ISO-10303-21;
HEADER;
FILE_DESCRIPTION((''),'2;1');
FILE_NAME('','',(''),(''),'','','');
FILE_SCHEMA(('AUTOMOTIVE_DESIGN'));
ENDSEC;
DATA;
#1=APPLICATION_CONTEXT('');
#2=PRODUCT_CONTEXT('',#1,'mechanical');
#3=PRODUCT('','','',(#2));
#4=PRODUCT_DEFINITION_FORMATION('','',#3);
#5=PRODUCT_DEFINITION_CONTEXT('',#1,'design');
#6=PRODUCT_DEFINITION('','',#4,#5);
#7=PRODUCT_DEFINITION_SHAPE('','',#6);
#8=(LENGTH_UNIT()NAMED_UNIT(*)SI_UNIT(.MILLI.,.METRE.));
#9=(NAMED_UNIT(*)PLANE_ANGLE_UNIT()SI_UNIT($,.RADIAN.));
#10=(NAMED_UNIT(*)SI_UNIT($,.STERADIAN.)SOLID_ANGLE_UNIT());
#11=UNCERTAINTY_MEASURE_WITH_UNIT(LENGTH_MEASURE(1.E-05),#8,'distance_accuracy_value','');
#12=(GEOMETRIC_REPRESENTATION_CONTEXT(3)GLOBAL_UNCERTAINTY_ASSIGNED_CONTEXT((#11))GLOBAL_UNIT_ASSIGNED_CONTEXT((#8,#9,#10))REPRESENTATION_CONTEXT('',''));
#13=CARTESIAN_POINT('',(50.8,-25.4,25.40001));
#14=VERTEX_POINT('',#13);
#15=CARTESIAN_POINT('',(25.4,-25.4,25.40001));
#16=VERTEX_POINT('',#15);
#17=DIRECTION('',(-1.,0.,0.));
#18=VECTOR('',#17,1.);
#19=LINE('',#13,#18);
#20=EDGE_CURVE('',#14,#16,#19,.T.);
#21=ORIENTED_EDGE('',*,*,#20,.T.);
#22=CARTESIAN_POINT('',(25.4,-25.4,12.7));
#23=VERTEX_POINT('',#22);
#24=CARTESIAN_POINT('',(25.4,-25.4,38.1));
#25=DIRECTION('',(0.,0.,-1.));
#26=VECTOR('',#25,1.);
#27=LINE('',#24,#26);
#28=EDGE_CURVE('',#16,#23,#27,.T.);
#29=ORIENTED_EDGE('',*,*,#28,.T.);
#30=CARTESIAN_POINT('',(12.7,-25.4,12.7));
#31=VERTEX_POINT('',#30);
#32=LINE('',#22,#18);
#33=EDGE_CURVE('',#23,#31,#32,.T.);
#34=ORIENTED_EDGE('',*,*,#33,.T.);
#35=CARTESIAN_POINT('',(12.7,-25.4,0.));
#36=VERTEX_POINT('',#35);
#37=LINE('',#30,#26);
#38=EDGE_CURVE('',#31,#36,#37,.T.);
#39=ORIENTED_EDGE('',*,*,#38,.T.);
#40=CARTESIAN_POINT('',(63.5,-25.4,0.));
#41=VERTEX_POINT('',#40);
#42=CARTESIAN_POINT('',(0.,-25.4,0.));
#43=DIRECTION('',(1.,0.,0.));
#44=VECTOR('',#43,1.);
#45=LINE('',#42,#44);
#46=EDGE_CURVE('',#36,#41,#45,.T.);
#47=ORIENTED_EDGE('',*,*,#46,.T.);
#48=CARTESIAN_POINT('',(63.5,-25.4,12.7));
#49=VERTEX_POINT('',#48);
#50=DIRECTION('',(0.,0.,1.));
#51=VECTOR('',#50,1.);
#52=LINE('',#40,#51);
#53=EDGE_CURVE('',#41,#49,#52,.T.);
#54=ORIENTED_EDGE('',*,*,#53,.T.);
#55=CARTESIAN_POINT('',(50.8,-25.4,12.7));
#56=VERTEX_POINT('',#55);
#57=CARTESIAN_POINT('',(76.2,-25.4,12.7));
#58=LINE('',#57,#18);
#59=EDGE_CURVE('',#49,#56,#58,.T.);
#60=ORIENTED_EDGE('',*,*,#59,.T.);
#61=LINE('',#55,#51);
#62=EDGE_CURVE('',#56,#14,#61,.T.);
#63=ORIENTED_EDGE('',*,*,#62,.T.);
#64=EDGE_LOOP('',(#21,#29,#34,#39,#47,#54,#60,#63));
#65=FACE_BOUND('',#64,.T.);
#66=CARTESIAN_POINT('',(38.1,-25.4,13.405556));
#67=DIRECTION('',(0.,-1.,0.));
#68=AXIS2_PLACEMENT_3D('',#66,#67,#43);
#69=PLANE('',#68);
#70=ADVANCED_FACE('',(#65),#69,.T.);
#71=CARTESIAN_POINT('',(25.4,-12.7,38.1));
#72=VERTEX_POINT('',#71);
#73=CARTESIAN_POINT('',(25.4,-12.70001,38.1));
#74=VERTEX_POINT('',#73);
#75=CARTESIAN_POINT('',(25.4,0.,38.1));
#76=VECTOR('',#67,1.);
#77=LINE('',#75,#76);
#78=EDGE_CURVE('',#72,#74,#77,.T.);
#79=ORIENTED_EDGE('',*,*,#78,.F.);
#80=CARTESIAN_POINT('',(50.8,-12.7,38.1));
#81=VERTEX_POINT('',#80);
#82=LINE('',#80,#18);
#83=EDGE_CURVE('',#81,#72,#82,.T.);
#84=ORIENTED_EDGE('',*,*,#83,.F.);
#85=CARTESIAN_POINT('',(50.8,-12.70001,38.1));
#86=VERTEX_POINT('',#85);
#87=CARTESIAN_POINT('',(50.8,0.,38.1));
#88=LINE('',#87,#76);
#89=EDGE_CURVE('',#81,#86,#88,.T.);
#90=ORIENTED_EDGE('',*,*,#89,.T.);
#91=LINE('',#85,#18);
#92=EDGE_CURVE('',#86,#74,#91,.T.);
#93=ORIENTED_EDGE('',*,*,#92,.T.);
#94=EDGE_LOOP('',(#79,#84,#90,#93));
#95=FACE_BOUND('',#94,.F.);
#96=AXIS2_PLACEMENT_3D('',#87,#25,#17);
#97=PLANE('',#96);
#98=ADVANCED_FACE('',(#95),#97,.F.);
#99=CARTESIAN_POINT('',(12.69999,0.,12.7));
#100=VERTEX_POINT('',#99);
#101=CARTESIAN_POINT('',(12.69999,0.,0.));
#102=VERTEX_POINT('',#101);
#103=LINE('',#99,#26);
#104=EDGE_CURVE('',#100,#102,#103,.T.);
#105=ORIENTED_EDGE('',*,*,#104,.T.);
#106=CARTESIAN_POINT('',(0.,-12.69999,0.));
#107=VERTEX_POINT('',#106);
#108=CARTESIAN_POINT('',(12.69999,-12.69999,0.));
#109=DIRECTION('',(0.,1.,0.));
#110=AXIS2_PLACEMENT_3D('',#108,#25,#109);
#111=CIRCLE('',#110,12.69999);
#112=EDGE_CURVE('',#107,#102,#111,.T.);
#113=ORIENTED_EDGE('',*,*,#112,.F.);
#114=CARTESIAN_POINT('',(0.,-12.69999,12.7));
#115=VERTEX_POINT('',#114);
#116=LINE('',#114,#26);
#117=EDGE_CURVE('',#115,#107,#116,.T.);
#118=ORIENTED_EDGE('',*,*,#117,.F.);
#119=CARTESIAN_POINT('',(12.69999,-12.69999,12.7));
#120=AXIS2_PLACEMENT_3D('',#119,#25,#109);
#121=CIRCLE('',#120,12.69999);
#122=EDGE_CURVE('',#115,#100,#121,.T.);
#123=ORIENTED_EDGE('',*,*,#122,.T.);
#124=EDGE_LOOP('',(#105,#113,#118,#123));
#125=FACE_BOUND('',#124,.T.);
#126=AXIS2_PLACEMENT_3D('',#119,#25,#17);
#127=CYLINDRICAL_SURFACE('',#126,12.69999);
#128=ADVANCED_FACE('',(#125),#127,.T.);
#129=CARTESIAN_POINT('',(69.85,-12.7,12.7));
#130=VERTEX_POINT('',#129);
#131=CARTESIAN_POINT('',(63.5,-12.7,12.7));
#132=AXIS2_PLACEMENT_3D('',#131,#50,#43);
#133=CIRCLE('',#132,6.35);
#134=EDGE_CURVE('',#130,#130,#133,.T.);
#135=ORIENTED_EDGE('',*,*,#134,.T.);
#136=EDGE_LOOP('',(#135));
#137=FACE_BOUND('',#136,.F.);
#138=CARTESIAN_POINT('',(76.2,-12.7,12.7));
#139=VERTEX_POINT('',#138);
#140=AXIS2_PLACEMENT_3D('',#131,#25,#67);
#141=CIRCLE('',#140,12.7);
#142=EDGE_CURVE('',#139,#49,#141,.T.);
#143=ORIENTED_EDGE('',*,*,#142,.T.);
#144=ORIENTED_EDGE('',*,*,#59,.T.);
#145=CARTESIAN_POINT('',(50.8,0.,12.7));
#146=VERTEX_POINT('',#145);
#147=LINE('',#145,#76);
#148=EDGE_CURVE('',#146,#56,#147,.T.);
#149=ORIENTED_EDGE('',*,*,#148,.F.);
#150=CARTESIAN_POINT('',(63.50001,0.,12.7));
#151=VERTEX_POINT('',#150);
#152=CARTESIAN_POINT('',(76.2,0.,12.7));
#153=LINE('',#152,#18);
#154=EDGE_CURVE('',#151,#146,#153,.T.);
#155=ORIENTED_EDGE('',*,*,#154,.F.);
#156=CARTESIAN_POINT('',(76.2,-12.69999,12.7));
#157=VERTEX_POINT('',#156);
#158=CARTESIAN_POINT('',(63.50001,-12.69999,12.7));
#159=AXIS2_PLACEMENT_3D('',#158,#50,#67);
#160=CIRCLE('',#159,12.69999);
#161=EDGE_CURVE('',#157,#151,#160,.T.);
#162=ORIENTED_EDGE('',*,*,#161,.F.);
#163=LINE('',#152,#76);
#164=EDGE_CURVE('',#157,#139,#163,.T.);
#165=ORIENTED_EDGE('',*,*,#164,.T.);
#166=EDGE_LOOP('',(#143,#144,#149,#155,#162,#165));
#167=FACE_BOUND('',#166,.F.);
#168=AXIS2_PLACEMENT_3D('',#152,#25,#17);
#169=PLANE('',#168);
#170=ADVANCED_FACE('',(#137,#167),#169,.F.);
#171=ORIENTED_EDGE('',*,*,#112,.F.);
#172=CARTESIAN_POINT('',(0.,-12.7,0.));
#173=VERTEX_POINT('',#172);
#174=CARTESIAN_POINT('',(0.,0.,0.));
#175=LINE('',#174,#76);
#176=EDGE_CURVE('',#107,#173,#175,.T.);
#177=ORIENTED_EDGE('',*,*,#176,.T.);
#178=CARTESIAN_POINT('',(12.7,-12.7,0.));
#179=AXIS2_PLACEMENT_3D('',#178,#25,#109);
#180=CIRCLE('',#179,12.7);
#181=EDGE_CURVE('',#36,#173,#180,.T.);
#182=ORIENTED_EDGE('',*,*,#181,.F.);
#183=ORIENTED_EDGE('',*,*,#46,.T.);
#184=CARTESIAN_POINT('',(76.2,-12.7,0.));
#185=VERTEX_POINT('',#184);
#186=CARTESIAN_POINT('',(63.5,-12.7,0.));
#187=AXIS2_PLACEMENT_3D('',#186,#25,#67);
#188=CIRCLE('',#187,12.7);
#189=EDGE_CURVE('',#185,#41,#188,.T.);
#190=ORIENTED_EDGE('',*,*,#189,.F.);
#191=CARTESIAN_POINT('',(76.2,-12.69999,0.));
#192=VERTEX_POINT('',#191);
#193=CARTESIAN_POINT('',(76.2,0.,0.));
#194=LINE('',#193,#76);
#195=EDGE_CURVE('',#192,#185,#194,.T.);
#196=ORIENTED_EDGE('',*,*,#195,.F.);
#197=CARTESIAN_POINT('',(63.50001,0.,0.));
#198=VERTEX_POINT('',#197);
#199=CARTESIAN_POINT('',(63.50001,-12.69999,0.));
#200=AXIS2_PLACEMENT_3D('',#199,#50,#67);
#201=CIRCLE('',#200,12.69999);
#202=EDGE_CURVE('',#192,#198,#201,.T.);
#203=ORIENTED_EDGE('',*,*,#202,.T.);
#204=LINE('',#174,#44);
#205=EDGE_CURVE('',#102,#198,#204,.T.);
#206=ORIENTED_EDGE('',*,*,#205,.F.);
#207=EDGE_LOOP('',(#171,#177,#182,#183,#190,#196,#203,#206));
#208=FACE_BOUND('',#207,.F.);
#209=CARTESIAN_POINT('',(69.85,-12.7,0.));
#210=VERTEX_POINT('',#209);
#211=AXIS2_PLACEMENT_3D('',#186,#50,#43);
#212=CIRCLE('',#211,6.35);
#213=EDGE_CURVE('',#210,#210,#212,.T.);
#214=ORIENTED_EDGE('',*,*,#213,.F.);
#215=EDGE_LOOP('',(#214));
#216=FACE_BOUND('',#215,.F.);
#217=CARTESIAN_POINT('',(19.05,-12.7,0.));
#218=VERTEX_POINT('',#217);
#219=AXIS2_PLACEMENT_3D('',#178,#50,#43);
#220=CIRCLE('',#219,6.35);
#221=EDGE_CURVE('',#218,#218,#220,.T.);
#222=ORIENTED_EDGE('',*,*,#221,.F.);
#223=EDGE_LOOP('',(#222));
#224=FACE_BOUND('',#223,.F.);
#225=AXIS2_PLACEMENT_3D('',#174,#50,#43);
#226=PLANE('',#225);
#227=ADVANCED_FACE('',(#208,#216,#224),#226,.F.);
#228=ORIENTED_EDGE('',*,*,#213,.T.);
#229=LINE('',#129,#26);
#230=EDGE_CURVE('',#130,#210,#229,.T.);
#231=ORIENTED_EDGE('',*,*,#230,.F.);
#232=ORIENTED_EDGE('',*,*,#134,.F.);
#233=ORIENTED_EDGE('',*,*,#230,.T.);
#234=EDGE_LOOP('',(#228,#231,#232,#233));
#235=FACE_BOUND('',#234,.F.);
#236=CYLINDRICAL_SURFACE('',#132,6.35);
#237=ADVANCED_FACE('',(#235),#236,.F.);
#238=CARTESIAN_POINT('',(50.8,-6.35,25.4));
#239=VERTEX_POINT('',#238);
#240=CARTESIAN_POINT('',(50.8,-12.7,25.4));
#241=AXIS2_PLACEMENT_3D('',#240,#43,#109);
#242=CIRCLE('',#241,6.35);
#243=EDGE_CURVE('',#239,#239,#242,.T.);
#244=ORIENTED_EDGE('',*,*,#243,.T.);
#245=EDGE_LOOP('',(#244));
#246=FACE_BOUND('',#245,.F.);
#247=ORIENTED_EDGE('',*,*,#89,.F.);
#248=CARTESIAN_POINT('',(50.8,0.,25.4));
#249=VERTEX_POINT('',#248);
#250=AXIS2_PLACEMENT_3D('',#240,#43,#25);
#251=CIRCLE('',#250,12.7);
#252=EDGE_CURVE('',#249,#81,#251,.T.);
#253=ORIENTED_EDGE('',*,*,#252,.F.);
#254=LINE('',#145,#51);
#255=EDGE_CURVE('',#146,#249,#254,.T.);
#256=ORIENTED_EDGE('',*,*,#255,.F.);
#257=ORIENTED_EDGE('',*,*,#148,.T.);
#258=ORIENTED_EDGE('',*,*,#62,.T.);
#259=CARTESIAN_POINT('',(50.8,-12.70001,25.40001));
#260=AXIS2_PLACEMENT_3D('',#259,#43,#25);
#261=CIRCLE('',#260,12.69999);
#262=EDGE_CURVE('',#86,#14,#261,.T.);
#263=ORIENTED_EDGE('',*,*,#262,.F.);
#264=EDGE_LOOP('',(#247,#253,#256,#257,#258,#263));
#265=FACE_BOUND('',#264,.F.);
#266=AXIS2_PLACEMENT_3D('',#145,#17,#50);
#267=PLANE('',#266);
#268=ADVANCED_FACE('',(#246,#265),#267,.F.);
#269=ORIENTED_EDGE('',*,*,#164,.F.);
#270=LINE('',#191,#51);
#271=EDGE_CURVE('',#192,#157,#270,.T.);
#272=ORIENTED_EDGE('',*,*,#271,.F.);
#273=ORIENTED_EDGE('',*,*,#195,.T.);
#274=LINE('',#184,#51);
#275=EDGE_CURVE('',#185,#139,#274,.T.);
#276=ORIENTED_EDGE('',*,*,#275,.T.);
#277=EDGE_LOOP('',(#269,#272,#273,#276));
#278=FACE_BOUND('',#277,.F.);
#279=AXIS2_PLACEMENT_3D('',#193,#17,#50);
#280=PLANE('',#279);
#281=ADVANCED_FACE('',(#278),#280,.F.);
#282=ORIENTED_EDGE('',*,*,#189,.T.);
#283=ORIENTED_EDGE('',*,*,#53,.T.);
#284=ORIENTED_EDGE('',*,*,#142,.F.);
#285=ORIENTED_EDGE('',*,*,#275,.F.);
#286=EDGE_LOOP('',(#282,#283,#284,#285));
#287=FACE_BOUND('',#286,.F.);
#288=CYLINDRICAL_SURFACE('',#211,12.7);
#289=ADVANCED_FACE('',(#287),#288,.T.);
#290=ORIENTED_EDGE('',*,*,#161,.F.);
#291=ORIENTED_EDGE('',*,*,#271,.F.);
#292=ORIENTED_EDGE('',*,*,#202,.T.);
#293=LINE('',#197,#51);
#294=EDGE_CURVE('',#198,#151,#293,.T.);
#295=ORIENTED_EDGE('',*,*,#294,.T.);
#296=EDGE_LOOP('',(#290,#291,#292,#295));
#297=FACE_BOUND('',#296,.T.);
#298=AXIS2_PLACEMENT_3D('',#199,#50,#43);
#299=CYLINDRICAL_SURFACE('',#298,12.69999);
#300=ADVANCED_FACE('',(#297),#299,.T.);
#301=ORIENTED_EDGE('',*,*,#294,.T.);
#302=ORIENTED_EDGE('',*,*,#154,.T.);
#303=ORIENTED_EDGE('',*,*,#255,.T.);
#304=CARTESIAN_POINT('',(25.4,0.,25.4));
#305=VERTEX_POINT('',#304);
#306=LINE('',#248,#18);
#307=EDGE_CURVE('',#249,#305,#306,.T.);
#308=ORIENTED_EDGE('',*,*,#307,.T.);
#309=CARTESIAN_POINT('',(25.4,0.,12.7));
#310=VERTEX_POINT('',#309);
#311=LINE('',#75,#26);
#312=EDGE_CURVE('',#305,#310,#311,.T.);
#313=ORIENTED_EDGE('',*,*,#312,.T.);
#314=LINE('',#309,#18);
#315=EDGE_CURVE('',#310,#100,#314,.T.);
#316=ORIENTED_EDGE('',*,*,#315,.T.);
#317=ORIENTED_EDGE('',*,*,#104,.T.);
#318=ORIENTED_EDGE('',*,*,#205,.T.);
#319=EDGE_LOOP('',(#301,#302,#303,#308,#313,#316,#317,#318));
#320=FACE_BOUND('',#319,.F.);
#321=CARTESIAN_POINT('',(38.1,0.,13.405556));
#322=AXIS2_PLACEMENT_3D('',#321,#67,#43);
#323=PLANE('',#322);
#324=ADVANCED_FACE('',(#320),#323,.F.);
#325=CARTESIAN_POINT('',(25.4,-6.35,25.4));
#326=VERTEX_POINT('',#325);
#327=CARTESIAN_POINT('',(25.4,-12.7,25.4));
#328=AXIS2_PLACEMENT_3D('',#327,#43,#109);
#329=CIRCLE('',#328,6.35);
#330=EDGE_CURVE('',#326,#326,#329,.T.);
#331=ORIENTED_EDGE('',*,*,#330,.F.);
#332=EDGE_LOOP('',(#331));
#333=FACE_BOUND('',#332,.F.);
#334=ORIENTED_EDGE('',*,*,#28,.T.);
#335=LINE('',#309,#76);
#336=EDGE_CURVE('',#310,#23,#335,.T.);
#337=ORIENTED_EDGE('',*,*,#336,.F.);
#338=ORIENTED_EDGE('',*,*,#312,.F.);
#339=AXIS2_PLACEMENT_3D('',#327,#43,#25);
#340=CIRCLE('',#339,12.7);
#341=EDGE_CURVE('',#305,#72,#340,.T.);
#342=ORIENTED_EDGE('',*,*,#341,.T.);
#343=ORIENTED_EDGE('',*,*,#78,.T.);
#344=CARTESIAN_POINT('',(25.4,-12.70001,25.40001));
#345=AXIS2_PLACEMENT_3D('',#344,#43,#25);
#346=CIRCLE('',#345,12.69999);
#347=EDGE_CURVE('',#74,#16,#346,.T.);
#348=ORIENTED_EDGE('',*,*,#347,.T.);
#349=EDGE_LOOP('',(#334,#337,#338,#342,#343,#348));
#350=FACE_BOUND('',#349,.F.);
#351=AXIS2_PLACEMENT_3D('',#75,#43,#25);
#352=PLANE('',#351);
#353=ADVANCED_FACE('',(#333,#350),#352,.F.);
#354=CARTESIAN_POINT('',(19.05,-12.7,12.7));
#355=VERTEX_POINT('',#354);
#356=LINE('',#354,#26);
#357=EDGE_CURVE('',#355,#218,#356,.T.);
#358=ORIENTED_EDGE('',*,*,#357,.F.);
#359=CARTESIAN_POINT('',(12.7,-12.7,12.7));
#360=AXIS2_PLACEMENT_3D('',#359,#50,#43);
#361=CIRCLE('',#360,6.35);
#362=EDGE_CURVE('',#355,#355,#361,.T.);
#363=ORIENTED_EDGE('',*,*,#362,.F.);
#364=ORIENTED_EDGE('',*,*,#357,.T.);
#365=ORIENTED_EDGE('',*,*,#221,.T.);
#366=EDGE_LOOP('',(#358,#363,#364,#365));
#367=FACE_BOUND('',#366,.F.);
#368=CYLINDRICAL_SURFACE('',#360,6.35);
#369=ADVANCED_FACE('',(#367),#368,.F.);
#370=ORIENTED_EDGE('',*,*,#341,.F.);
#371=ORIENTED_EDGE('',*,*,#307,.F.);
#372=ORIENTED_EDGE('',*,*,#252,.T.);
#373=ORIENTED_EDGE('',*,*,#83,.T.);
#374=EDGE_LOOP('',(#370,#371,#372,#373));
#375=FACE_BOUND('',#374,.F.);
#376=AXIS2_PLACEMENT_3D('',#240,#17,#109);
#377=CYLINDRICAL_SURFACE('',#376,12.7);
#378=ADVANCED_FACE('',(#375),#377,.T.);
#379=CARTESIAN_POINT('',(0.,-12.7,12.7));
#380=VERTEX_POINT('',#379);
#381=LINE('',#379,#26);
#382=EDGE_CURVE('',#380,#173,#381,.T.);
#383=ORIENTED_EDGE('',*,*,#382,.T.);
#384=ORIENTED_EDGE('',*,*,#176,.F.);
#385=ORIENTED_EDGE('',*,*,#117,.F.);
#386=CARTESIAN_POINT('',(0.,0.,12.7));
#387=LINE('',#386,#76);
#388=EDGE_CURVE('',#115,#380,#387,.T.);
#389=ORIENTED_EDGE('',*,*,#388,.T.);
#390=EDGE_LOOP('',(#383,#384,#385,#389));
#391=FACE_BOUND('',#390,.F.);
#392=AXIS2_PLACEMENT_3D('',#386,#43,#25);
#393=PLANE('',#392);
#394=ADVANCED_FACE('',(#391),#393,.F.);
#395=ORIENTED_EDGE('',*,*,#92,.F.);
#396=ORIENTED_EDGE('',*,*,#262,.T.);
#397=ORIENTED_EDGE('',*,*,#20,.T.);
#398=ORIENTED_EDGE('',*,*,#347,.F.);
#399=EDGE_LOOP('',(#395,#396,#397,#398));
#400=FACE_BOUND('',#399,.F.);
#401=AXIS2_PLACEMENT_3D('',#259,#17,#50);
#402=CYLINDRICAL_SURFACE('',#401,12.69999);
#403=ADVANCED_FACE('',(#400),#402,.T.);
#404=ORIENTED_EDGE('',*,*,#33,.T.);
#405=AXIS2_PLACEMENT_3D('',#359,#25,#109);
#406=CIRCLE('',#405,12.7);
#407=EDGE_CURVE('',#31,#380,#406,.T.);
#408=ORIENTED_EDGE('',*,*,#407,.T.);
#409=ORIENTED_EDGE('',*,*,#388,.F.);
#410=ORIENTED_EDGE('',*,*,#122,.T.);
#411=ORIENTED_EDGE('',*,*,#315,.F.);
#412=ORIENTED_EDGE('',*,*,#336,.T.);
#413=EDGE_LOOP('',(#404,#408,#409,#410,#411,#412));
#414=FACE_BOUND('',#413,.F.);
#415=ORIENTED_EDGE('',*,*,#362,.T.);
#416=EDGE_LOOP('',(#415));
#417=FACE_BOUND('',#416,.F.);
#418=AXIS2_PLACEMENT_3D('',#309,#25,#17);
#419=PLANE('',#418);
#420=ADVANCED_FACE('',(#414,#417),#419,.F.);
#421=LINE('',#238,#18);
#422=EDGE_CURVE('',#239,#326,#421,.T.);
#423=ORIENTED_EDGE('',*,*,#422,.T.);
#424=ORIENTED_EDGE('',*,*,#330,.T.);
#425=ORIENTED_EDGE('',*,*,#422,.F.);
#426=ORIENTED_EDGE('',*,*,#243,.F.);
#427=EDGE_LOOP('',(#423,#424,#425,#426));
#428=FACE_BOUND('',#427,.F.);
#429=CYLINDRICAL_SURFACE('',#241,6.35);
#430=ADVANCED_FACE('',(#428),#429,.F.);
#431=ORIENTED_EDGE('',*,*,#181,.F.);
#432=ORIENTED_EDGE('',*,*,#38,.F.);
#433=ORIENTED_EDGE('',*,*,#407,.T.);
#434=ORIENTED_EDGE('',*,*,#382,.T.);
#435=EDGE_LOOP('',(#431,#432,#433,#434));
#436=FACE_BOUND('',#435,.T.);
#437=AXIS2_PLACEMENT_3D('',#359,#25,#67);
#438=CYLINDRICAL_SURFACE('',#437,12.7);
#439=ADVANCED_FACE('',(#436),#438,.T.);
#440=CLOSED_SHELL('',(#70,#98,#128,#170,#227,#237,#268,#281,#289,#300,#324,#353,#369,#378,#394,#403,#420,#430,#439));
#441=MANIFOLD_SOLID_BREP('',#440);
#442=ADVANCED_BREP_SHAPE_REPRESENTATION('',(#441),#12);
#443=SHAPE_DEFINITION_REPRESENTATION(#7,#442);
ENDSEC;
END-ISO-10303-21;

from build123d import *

# Parameters (mm, degrees)
F1_DEPTH  = 25.4
F2_R      = 12.7
F3_R      = 12.69999
F4_R      = 12.7
F5_R      = 12.69999
F6_R      = 12.7
F7_R      = 12.69999
F8_R      = 6.35
F9_DEPTH  = 25.4
F10_R     = 6.35
F11_DEPTH = 25.4
F12_R     = 6.35
F13_DEPTH = 25.4


# Not quite as in the source:
# - a fillet or chamfer is up to 0.001 mm smaller than in the source, because OpenCascade refuses the exact size


with BuildPart() as f1:
    # F0 (on Front) → F1 (new body)
    with BuildSketch(Plane.XZ):
        Polygon((0, 12.7), (0, 0), (76.2, 0), (76.2, 12.7), (50.8, 12.7), (50.8, 38.1), (25.4, 38.1), (25.4, 12.7), align=None)
    extrude(amount=F1_DEPTH)

    # F2
    f2_edges = [f1.edges().sort_by_distance(p)[0] for p in [
        (76.2, -25.4, 6.35),
    ]]
    fillet(f2_edges, radius=F2_R)

    # F3 (radius 12.7 in the source; OpenCascade refuses exactly that, so slightly less here)
    f3_edges = [f1.edges().sort_by_distance(p)[0] for p in [
        (76.2, 0, 6.35),
    ]]
    fillet(f3_edges, radius=F3_R)

    # F4
    f4_edges = [f1.edges().sort_by_distance(p)[0] for p in [
        (0, -25.4, 6.35),
    ]]
    fillet(f4_edges, radius=F4_R)

    # F5 (radius 12.7 in the source; OpenCascade refuses exactly that, so slightly less here)
    f5_edges = [f1.edges().sort_by_distance(p)[0] for p in [
        (0, 0, 6.35),
    ]]
    fillet(f5_edges, radius=F5_R)

    # F6
    f6_edges = [f1.edges().sort_by_distance(p)[0] for p in [
        (38.1, 0, 38.1),
    ]]
    fillet(f6_edges, radius=F6_R)

    # F7 (radius 12.7 in the source; OpenCascade refuses exactly that, so slightly less here)
    f7_edges = [f1.edges().sort_by_distance(p)[0] for p in [
        (38.1, -25.4, 38.1),
    ]]
    fillet(f7_edges, radius=F7_R)

    # F8 (on face) → F9 (cut)
    with BuildSketch(Plane.YZ.offset(50.8)):
        with Locations((-12.7, 25.4)):
            Circle(F8_R)
    extrude(amount=-F9_DEPTH, mode=Mode.SUBTRACT)

    # F10 (on face) → F11 (cut)
    with BuildSketch(Plane.XY.offset(12.7)):
        with Locations((63.5, -12.7)):
            Circle(F10_R)
    extrude(amount=-F11_DEPTH, mode=Mode.SUBTRACT)

    # F12 (on face) → F13 (cut)
    with BuildSketch(Plane.XY.offset(12.7)):
        with Locations((12.7, -12.7)):
            Circle(F12_R)
    extrude(amount=-F13_DEPTH, mode=Mode.SUBTRACT)


solid = f1.part
